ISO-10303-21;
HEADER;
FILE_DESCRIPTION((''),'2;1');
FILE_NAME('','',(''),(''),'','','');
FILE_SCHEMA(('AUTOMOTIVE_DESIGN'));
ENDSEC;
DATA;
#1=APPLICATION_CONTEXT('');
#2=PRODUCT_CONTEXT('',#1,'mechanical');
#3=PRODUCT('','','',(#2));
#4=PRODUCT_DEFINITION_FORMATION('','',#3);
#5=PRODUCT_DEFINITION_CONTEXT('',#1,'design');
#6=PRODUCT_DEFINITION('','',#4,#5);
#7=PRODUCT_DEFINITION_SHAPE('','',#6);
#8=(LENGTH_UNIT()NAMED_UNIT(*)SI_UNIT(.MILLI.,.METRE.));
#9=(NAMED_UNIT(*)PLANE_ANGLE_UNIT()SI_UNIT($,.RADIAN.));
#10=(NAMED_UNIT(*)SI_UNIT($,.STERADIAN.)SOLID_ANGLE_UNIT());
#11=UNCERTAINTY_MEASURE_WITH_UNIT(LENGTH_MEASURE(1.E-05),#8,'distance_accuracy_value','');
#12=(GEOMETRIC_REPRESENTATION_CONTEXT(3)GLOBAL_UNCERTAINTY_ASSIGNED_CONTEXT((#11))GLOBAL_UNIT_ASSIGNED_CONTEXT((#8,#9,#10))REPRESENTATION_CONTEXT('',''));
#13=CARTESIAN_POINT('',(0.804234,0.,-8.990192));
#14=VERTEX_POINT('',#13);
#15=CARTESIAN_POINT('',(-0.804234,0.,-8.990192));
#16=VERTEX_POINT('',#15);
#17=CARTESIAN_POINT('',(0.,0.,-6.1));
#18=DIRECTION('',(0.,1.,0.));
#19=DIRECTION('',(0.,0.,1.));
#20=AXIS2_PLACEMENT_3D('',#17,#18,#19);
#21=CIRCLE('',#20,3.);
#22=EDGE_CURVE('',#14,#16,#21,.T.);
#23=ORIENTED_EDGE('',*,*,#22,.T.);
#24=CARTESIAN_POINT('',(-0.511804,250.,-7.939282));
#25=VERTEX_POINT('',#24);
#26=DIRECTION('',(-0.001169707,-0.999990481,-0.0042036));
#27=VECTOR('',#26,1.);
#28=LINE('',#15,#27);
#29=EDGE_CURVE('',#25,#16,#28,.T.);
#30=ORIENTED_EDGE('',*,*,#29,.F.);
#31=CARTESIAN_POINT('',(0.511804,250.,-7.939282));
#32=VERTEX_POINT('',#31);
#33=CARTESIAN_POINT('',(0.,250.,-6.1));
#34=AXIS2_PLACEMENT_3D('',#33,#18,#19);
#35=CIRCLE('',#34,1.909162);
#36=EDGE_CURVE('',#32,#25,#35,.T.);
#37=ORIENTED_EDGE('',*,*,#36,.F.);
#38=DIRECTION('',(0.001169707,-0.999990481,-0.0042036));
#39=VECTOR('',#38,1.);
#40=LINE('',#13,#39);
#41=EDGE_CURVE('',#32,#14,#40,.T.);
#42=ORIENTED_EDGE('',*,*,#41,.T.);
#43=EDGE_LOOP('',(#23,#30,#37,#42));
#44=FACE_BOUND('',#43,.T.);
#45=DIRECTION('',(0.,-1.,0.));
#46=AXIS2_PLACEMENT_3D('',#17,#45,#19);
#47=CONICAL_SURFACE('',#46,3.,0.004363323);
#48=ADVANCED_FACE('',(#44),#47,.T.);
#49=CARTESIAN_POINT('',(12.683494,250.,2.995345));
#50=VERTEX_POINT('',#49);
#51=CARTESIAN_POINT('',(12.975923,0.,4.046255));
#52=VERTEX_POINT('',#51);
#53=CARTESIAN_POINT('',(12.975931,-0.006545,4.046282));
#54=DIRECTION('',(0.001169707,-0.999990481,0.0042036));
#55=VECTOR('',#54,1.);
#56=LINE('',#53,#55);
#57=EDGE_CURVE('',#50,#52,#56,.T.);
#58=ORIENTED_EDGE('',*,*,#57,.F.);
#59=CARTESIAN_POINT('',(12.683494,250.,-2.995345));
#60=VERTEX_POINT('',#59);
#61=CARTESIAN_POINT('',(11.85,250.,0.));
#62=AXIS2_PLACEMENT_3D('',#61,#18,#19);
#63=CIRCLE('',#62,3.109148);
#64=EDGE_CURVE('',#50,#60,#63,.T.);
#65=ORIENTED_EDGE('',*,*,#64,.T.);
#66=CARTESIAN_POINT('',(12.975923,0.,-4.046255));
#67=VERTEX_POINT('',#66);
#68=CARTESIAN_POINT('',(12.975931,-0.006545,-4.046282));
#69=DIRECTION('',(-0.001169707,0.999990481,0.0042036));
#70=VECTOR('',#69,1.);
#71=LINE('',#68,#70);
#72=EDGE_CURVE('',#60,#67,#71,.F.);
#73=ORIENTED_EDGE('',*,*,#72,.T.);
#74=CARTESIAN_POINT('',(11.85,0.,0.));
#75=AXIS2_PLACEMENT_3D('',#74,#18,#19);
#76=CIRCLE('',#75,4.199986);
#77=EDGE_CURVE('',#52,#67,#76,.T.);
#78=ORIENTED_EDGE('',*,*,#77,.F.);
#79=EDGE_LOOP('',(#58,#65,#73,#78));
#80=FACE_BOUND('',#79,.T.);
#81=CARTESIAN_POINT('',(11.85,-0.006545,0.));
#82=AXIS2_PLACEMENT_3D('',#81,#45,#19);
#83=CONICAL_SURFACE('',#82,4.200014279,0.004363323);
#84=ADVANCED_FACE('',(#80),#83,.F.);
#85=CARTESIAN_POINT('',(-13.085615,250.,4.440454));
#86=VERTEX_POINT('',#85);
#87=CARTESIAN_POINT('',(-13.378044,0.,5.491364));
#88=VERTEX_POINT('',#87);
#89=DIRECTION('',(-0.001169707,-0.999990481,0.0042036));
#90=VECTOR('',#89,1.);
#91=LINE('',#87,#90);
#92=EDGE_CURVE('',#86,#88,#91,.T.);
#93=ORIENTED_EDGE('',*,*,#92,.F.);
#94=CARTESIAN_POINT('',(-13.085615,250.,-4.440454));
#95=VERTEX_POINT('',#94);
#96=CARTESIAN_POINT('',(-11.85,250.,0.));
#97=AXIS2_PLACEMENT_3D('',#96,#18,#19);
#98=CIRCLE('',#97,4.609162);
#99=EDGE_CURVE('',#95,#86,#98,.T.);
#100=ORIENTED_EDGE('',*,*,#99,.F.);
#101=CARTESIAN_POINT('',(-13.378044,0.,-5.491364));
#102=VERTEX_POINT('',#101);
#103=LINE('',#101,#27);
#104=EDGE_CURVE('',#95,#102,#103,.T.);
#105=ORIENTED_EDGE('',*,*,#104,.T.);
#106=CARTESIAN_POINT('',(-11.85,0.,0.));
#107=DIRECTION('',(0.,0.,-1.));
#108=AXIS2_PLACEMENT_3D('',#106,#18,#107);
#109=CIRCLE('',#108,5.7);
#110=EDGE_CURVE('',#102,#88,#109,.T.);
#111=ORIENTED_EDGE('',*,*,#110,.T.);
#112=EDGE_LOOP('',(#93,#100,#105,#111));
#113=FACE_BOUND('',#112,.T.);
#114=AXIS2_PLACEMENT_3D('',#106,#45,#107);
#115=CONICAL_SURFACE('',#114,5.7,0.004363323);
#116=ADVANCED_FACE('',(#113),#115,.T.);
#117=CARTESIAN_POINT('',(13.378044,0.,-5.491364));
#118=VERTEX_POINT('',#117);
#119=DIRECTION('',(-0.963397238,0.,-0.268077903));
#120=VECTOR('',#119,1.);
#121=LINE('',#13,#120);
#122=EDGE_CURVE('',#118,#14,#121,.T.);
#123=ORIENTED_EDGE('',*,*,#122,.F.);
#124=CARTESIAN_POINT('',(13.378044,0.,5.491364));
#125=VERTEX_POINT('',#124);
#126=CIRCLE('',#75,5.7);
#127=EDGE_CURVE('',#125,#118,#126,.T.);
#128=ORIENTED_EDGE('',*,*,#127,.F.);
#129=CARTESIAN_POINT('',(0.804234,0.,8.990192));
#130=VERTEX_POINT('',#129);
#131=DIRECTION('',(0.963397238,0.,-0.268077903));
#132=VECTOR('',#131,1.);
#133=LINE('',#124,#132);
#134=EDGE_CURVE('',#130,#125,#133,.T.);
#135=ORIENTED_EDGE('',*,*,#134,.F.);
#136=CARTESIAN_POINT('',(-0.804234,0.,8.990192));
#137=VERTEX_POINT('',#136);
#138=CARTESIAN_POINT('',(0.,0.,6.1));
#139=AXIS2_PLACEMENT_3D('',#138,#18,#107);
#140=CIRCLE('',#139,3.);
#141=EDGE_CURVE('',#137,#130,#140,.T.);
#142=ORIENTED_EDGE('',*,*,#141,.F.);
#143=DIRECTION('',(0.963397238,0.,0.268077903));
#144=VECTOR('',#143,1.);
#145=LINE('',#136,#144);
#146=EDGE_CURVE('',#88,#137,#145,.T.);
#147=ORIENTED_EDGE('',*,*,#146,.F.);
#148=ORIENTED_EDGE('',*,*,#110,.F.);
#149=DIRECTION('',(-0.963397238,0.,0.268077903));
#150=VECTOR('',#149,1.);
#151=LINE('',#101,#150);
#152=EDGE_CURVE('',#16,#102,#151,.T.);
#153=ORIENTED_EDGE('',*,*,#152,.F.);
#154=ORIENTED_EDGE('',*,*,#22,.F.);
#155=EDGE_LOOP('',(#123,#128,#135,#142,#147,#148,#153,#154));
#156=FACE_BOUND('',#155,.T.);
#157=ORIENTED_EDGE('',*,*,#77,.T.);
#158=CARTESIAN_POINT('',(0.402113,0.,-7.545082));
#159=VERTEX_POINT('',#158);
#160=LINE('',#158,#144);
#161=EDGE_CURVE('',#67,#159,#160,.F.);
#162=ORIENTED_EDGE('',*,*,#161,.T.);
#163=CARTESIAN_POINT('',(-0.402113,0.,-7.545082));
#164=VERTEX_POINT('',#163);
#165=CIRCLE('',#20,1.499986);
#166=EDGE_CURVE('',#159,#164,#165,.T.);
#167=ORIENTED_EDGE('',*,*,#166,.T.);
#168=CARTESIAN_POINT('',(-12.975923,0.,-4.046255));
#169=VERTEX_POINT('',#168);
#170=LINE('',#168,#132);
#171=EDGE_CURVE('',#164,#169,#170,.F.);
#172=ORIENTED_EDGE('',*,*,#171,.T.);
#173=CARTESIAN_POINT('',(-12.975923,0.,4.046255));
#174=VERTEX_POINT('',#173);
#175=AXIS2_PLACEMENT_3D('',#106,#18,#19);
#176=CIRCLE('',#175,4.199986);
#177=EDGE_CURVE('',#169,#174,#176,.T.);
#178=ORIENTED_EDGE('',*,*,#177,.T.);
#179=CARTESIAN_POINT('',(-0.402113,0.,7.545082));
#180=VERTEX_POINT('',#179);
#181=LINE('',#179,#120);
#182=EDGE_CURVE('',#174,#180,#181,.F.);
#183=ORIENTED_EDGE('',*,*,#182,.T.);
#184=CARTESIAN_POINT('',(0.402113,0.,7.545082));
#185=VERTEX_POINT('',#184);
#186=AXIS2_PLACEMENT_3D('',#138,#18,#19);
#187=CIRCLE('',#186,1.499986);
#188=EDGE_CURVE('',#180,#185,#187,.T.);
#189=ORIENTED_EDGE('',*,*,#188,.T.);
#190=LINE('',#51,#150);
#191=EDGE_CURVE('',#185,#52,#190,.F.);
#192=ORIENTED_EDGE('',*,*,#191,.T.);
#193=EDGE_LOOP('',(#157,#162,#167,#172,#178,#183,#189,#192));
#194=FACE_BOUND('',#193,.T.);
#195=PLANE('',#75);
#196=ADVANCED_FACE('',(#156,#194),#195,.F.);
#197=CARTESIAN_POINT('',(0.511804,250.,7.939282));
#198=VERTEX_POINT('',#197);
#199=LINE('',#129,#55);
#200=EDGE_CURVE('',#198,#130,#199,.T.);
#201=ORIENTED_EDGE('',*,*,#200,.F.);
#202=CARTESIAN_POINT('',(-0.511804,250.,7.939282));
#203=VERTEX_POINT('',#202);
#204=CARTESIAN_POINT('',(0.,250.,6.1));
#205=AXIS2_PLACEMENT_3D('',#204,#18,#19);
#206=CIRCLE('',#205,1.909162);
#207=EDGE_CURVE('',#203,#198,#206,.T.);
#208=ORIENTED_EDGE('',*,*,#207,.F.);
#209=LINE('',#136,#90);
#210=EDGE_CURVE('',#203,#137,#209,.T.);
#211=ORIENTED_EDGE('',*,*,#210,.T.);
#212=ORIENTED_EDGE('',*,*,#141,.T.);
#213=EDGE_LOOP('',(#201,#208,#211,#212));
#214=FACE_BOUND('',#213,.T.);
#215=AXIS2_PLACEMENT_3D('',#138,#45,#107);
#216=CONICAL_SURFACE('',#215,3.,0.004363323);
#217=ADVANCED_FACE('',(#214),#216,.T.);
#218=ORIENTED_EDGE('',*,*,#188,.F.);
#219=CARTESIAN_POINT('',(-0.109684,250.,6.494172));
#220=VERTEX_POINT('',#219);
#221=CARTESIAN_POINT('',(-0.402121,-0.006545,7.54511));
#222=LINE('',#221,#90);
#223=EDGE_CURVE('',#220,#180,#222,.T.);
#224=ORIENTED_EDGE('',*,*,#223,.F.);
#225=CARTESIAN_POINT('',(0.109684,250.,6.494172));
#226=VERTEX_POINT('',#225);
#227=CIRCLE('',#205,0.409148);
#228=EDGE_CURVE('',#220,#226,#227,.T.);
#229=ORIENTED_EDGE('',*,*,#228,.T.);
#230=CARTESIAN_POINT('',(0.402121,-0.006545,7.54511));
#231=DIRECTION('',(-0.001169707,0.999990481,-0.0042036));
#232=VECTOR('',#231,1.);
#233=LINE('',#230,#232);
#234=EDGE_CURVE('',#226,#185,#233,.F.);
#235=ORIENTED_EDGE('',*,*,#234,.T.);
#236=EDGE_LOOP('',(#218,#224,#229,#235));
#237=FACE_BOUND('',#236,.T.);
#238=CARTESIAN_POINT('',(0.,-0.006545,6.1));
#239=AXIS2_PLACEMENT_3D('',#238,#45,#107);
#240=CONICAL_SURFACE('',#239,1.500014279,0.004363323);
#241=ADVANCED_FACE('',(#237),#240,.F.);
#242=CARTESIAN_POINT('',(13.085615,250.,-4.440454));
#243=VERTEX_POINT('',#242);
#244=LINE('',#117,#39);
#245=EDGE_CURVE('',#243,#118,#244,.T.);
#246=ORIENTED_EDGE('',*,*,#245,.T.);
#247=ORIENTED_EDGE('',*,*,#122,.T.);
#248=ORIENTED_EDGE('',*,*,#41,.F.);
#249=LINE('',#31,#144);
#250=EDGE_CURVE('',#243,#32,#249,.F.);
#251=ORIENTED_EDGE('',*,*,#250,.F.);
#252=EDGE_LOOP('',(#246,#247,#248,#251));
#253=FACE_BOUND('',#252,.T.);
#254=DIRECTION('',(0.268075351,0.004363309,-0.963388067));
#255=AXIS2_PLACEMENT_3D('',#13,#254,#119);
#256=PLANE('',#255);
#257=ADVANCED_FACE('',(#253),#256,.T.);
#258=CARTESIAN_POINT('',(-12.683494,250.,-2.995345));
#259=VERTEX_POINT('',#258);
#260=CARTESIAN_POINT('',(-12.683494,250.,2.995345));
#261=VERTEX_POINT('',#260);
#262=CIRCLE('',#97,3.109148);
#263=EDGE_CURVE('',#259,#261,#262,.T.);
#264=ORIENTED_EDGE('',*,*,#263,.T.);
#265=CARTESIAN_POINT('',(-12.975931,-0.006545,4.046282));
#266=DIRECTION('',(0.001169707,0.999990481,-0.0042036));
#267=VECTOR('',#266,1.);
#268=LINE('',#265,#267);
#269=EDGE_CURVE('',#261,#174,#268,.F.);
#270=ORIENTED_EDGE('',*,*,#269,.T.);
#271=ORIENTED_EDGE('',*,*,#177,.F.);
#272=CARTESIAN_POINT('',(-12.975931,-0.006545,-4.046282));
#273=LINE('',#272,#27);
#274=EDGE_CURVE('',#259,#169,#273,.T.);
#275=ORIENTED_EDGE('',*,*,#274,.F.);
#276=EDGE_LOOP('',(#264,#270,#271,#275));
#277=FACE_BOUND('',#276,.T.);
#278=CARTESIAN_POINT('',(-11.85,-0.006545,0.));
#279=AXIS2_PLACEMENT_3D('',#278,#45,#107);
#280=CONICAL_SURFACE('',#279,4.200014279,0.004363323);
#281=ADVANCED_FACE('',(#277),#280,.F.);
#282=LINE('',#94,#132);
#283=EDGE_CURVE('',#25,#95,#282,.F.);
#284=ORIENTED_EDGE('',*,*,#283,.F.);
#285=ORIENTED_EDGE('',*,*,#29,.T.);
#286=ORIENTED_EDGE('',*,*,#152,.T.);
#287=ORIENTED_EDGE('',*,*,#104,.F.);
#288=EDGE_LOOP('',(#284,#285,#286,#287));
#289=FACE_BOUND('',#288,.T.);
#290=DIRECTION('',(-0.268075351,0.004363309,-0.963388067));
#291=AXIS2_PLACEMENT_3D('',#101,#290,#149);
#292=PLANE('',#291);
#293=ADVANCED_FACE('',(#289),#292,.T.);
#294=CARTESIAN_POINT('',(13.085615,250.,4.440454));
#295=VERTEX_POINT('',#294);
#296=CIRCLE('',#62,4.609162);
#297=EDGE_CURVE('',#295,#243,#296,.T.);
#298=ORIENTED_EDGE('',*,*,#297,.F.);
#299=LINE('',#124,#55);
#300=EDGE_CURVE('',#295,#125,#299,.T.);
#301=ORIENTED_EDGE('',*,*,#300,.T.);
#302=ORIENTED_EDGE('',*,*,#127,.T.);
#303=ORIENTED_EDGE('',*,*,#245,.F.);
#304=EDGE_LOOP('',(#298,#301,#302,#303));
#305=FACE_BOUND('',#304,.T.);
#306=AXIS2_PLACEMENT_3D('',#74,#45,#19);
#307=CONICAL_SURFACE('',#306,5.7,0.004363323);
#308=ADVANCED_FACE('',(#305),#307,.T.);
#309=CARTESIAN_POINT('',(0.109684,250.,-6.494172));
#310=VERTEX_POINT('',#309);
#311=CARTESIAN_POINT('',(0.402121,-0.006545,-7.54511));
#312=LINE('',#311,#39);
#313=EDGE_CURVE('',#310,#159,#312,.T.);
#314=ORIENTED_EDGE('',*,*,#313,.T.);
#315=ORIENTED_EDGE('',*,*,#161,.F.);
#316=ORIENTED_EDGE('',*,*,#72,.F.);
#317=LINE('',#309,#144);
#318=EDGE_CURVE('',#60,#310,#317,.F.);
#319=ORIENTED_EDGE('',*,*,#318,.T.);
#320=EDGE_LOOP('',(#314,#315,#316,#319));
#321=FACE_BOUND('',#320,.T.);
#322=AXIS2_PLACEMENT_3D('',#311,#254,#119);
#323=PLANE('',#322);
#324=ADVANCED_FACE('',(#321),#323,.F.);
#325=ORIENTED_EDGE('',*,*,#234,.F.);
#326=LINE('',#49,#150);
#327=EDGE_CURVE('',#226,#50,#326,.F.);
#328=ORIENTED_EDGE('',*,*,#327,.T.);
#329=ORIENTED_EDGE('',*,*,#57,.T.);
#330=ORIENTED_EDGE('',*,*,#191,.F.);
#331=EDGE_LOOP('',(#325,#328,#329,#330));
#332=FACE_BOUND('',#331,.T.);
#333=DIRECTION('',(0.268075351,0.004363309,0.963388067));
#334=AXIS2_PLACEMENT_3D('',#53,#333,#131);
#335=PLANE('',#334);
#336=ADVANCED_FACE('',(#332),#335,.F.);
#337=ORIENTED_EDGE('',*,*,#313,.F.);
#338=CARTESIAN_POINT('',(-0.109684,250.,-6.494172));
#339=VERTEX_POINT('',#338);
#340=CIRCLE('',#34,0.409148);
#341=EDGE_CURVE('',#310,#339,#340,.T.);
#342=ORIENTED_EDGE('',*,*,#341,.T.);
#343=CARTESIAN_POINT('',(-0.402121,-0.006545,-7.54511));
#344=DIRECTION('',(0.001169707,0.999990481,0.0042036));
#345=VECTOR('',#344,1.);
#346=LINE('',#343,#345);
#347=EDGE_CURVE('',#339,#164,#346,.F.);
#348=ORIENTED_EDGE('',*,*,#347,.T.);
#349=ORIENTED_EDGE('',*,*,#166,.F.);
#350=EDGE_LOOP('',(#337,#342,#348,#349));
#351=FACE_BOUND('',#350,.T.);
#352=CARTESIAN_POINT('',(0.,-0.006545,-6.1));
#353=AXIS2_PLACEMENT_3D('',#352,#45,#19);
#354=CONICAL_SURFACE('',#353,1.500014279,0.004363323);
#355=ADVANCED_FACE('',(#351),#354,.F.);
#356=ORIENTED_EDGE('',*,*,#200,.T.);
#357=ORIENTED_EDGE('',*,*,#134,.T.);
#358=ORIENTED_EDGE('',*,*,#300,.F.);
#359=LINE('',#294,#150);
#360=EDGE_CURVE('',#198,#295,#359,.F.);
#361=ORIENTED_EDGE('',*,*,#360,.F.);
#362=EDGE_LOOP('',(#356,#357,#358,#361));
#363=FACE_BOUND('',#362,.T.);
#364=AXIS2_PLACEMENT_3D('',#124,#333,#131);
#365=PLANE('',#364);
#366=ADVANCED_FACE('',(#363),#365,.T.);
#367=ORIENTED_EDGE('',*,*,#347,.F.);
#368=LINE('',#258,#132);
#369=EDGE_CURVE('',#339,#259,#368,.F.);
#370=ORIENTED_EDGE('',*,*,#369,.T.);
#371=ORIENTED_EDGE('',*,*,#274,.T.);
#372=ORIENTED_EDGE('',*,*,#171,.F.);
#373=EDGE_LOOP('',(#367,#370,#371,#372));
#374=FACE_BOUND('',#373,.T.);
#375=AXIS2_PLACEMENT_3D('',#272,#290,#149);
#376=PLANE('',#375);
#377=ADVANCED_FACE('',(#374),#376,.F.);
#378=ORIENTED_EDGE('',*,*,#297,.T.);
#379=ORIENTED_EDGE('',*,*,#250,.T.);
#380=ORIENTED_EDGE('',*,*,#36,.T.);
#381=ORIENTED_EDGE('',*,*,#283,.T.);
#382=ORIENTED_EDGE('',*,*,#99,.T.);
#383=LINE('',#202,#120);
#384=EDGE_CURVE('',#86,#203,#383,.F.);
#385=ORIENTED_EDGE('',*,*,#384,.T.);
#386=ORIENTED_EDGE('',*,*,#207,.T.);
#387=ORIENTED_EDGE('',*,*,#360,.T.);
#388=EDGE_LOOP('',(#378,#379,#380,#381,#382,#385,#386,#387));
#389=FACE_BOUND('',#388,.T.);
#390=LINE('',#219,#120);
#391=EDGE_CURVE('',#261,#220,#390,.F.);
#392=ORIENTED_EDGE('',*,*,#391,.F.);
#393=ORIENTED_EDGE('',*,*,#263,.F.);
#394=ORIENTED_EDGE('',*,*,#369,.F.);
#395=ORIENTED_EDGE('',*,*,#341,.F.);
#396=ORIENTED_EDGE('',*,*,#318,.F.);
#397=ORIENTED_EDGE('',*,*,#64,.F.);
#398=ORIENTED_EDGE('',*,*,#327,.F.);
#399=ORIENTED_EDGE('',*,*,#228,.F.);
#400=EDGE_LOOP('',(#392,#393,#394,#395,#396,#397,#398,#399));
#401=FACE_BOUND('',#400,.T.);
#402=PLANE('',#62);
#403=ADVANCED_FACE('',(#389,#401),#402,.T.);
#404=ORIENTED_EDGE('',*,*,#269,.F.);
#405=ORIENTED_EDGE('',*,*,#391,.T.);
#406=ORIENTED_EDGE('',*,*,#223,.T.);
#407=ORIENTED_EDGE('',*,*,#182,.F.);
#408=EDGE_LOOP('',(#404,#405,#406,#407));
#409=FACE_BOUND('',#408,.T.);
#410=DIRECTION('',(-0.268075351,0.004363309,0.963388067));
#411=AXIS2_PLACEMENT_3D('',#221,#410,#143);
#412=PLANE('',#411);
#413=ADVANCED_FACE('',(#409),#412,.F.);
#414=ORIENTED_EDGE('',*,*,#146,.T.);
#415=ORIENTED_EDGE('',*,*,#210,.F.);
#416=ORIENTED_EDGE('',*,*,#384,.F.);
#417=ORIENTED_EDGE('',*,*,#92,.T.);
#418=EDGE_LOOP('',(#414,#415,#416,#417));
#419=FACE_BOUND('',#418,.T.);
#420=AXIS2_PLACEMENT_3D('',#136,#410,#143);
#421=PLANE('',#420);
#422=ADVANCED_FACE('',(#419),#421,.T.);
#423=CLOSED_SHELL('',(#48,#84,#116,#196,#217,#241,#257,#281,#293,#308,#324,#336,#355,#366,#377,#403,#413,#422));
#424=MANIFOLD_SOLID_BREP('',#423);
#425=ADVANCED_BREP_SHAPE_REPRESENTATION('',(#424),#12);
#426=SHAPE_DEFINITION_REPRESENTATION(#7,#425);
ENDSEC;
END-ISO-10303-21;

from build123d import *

# Parameters (mm, degrees)
BOSS_EXTRUDE1_DEPTH = 250
BOSS_EXTRUDE1_TAPER = 0.25


with BuildPart() as part:
    # Sketch1 → Boss-Extrude1 (new body)
    with BuildSketch(Plane(origin=(0, 0, 0), x_dir=(1, 0, 0), z_dir=(0, 1, 0))):
        with BuildLine():
            ThreePointArc((-13.378044047, 5.491364256), (-17.55, 0), (-13.378044047, -5.491364256))
            Line((-13.378044047, -5.491364256), (-0.804233709, -8.990191714))
            ThreePointArc((-0.804233709, -8.990191714), (0, -9.1), (0.804233709, -8.990191714))
            Line((0.804233709, -8.990191714), (13.378044047, -5.491364256))
            ThreePointArc((13.378044047, -5.491364256), (17.55, 0), (13.378044047, 5.491364256))
            Line((13.378044047, 5.491364256), (0.804233709, 8.990191714))
            ThreePointArc((0.804233709, 8.990191714), (0, 9.1), (-0.804233709, 8.990191714))
            Line((-0.804233709, 8.990191714), (-13.378044047, 5.491364256))
        make_face()
    extrude(amount=BOSS_EXTRUDE1_DEPTH, taper=BOSS_EXTRUDE1_TAPER)

    # Shell1: read off the stored shape, not the designer's step
    # Shell1: loft between two sections, ruled curve by curve
    shell1_from = [
        Edge.make_three_point_arc((12.68349388, 250, -2.99534461), (14.959148016, 250, 0), (12.68349388, 250, 2.99534461)),
        Edge.make_three_point_arc((-0.109683542, 250, -6.494172068), (0, 250, -6.509148016), (0.109683542, 250, -6.494172068)),
        Edge.make_three_point_arc((-12.68349388, 250, 2.99534461), (-14.959148016, 250, 0), (-12.68349388, 250, -2.99534461)),
        Edge.make_three_point_arc((0.109683542, 250, 6.494172068), (0, 250, 6.509148016), (-0.109683542, 250, 6.494172068)),
        Edge.make_line((12.68349388, 250, -2.99534461), (0.109683542, 250, -6.494172068)),
        Edge.make_line((-0.109683542, 250, -6.494172068), (-12.68349388, 250, -2.99534461)),
        Edge.make_line((-12.68349388, 250, 2.99534461), (-0.109683542, 250, 6.494172068)),
        Edge.make_line((0.109683542, 250, 6.494172068), (12.68349388, 250, 2.99534461)),
    ]
    shell1_to = [
        Edge.make_three_point_arc((12.975923365, 0, -4.046254643), (16.049985721, 0, 0), (12.975923365, 0, 4.046254643)),
        Edge.make_three_point_arc((-0.402113027, 0, -7.5450821), (0, 0, -7.599985721), (0.402113027, 0, -7.5450821)),
        Edge.make_three_point_arc((-12.975923365, 0, 4.046254643), (-16.049985721, 0, 0), (-12.975923365, 0, -4.046254643)),
        Edge.make_three_point_arc((0.402113027, 0, 7.5450821), (0, 0, 7.599985721), (-0.402113027, 0, 7.5450821)),
        Edge.make_line((12.975923365, 0, -4.046254643), (0.402113027, 0, -7.5450821)),
        Edge.make_line((-0.402113027, 0, -7.5450821), (-12.975923365, 0, -4.046254643)),
        Edge.make_line((-12.975923365, 0, 4.046254643), (-0.402113027, 0, 7.5450821)),
        Edge.make_line((0.402113027, 0, 7.5450821), (12.975923365, 0, 4.046254643)),
    ]
    shell1 = Solid(Shell([*[Face.make_surface_from_curves(shell1_from[k], shell1_to[k]) for k in range(8)], Face(Wire(shell1_from)), Face(Wire(shell1_to))]))
    add(shell1, mode=Mode.SUBTRACT)


solid = part.part
